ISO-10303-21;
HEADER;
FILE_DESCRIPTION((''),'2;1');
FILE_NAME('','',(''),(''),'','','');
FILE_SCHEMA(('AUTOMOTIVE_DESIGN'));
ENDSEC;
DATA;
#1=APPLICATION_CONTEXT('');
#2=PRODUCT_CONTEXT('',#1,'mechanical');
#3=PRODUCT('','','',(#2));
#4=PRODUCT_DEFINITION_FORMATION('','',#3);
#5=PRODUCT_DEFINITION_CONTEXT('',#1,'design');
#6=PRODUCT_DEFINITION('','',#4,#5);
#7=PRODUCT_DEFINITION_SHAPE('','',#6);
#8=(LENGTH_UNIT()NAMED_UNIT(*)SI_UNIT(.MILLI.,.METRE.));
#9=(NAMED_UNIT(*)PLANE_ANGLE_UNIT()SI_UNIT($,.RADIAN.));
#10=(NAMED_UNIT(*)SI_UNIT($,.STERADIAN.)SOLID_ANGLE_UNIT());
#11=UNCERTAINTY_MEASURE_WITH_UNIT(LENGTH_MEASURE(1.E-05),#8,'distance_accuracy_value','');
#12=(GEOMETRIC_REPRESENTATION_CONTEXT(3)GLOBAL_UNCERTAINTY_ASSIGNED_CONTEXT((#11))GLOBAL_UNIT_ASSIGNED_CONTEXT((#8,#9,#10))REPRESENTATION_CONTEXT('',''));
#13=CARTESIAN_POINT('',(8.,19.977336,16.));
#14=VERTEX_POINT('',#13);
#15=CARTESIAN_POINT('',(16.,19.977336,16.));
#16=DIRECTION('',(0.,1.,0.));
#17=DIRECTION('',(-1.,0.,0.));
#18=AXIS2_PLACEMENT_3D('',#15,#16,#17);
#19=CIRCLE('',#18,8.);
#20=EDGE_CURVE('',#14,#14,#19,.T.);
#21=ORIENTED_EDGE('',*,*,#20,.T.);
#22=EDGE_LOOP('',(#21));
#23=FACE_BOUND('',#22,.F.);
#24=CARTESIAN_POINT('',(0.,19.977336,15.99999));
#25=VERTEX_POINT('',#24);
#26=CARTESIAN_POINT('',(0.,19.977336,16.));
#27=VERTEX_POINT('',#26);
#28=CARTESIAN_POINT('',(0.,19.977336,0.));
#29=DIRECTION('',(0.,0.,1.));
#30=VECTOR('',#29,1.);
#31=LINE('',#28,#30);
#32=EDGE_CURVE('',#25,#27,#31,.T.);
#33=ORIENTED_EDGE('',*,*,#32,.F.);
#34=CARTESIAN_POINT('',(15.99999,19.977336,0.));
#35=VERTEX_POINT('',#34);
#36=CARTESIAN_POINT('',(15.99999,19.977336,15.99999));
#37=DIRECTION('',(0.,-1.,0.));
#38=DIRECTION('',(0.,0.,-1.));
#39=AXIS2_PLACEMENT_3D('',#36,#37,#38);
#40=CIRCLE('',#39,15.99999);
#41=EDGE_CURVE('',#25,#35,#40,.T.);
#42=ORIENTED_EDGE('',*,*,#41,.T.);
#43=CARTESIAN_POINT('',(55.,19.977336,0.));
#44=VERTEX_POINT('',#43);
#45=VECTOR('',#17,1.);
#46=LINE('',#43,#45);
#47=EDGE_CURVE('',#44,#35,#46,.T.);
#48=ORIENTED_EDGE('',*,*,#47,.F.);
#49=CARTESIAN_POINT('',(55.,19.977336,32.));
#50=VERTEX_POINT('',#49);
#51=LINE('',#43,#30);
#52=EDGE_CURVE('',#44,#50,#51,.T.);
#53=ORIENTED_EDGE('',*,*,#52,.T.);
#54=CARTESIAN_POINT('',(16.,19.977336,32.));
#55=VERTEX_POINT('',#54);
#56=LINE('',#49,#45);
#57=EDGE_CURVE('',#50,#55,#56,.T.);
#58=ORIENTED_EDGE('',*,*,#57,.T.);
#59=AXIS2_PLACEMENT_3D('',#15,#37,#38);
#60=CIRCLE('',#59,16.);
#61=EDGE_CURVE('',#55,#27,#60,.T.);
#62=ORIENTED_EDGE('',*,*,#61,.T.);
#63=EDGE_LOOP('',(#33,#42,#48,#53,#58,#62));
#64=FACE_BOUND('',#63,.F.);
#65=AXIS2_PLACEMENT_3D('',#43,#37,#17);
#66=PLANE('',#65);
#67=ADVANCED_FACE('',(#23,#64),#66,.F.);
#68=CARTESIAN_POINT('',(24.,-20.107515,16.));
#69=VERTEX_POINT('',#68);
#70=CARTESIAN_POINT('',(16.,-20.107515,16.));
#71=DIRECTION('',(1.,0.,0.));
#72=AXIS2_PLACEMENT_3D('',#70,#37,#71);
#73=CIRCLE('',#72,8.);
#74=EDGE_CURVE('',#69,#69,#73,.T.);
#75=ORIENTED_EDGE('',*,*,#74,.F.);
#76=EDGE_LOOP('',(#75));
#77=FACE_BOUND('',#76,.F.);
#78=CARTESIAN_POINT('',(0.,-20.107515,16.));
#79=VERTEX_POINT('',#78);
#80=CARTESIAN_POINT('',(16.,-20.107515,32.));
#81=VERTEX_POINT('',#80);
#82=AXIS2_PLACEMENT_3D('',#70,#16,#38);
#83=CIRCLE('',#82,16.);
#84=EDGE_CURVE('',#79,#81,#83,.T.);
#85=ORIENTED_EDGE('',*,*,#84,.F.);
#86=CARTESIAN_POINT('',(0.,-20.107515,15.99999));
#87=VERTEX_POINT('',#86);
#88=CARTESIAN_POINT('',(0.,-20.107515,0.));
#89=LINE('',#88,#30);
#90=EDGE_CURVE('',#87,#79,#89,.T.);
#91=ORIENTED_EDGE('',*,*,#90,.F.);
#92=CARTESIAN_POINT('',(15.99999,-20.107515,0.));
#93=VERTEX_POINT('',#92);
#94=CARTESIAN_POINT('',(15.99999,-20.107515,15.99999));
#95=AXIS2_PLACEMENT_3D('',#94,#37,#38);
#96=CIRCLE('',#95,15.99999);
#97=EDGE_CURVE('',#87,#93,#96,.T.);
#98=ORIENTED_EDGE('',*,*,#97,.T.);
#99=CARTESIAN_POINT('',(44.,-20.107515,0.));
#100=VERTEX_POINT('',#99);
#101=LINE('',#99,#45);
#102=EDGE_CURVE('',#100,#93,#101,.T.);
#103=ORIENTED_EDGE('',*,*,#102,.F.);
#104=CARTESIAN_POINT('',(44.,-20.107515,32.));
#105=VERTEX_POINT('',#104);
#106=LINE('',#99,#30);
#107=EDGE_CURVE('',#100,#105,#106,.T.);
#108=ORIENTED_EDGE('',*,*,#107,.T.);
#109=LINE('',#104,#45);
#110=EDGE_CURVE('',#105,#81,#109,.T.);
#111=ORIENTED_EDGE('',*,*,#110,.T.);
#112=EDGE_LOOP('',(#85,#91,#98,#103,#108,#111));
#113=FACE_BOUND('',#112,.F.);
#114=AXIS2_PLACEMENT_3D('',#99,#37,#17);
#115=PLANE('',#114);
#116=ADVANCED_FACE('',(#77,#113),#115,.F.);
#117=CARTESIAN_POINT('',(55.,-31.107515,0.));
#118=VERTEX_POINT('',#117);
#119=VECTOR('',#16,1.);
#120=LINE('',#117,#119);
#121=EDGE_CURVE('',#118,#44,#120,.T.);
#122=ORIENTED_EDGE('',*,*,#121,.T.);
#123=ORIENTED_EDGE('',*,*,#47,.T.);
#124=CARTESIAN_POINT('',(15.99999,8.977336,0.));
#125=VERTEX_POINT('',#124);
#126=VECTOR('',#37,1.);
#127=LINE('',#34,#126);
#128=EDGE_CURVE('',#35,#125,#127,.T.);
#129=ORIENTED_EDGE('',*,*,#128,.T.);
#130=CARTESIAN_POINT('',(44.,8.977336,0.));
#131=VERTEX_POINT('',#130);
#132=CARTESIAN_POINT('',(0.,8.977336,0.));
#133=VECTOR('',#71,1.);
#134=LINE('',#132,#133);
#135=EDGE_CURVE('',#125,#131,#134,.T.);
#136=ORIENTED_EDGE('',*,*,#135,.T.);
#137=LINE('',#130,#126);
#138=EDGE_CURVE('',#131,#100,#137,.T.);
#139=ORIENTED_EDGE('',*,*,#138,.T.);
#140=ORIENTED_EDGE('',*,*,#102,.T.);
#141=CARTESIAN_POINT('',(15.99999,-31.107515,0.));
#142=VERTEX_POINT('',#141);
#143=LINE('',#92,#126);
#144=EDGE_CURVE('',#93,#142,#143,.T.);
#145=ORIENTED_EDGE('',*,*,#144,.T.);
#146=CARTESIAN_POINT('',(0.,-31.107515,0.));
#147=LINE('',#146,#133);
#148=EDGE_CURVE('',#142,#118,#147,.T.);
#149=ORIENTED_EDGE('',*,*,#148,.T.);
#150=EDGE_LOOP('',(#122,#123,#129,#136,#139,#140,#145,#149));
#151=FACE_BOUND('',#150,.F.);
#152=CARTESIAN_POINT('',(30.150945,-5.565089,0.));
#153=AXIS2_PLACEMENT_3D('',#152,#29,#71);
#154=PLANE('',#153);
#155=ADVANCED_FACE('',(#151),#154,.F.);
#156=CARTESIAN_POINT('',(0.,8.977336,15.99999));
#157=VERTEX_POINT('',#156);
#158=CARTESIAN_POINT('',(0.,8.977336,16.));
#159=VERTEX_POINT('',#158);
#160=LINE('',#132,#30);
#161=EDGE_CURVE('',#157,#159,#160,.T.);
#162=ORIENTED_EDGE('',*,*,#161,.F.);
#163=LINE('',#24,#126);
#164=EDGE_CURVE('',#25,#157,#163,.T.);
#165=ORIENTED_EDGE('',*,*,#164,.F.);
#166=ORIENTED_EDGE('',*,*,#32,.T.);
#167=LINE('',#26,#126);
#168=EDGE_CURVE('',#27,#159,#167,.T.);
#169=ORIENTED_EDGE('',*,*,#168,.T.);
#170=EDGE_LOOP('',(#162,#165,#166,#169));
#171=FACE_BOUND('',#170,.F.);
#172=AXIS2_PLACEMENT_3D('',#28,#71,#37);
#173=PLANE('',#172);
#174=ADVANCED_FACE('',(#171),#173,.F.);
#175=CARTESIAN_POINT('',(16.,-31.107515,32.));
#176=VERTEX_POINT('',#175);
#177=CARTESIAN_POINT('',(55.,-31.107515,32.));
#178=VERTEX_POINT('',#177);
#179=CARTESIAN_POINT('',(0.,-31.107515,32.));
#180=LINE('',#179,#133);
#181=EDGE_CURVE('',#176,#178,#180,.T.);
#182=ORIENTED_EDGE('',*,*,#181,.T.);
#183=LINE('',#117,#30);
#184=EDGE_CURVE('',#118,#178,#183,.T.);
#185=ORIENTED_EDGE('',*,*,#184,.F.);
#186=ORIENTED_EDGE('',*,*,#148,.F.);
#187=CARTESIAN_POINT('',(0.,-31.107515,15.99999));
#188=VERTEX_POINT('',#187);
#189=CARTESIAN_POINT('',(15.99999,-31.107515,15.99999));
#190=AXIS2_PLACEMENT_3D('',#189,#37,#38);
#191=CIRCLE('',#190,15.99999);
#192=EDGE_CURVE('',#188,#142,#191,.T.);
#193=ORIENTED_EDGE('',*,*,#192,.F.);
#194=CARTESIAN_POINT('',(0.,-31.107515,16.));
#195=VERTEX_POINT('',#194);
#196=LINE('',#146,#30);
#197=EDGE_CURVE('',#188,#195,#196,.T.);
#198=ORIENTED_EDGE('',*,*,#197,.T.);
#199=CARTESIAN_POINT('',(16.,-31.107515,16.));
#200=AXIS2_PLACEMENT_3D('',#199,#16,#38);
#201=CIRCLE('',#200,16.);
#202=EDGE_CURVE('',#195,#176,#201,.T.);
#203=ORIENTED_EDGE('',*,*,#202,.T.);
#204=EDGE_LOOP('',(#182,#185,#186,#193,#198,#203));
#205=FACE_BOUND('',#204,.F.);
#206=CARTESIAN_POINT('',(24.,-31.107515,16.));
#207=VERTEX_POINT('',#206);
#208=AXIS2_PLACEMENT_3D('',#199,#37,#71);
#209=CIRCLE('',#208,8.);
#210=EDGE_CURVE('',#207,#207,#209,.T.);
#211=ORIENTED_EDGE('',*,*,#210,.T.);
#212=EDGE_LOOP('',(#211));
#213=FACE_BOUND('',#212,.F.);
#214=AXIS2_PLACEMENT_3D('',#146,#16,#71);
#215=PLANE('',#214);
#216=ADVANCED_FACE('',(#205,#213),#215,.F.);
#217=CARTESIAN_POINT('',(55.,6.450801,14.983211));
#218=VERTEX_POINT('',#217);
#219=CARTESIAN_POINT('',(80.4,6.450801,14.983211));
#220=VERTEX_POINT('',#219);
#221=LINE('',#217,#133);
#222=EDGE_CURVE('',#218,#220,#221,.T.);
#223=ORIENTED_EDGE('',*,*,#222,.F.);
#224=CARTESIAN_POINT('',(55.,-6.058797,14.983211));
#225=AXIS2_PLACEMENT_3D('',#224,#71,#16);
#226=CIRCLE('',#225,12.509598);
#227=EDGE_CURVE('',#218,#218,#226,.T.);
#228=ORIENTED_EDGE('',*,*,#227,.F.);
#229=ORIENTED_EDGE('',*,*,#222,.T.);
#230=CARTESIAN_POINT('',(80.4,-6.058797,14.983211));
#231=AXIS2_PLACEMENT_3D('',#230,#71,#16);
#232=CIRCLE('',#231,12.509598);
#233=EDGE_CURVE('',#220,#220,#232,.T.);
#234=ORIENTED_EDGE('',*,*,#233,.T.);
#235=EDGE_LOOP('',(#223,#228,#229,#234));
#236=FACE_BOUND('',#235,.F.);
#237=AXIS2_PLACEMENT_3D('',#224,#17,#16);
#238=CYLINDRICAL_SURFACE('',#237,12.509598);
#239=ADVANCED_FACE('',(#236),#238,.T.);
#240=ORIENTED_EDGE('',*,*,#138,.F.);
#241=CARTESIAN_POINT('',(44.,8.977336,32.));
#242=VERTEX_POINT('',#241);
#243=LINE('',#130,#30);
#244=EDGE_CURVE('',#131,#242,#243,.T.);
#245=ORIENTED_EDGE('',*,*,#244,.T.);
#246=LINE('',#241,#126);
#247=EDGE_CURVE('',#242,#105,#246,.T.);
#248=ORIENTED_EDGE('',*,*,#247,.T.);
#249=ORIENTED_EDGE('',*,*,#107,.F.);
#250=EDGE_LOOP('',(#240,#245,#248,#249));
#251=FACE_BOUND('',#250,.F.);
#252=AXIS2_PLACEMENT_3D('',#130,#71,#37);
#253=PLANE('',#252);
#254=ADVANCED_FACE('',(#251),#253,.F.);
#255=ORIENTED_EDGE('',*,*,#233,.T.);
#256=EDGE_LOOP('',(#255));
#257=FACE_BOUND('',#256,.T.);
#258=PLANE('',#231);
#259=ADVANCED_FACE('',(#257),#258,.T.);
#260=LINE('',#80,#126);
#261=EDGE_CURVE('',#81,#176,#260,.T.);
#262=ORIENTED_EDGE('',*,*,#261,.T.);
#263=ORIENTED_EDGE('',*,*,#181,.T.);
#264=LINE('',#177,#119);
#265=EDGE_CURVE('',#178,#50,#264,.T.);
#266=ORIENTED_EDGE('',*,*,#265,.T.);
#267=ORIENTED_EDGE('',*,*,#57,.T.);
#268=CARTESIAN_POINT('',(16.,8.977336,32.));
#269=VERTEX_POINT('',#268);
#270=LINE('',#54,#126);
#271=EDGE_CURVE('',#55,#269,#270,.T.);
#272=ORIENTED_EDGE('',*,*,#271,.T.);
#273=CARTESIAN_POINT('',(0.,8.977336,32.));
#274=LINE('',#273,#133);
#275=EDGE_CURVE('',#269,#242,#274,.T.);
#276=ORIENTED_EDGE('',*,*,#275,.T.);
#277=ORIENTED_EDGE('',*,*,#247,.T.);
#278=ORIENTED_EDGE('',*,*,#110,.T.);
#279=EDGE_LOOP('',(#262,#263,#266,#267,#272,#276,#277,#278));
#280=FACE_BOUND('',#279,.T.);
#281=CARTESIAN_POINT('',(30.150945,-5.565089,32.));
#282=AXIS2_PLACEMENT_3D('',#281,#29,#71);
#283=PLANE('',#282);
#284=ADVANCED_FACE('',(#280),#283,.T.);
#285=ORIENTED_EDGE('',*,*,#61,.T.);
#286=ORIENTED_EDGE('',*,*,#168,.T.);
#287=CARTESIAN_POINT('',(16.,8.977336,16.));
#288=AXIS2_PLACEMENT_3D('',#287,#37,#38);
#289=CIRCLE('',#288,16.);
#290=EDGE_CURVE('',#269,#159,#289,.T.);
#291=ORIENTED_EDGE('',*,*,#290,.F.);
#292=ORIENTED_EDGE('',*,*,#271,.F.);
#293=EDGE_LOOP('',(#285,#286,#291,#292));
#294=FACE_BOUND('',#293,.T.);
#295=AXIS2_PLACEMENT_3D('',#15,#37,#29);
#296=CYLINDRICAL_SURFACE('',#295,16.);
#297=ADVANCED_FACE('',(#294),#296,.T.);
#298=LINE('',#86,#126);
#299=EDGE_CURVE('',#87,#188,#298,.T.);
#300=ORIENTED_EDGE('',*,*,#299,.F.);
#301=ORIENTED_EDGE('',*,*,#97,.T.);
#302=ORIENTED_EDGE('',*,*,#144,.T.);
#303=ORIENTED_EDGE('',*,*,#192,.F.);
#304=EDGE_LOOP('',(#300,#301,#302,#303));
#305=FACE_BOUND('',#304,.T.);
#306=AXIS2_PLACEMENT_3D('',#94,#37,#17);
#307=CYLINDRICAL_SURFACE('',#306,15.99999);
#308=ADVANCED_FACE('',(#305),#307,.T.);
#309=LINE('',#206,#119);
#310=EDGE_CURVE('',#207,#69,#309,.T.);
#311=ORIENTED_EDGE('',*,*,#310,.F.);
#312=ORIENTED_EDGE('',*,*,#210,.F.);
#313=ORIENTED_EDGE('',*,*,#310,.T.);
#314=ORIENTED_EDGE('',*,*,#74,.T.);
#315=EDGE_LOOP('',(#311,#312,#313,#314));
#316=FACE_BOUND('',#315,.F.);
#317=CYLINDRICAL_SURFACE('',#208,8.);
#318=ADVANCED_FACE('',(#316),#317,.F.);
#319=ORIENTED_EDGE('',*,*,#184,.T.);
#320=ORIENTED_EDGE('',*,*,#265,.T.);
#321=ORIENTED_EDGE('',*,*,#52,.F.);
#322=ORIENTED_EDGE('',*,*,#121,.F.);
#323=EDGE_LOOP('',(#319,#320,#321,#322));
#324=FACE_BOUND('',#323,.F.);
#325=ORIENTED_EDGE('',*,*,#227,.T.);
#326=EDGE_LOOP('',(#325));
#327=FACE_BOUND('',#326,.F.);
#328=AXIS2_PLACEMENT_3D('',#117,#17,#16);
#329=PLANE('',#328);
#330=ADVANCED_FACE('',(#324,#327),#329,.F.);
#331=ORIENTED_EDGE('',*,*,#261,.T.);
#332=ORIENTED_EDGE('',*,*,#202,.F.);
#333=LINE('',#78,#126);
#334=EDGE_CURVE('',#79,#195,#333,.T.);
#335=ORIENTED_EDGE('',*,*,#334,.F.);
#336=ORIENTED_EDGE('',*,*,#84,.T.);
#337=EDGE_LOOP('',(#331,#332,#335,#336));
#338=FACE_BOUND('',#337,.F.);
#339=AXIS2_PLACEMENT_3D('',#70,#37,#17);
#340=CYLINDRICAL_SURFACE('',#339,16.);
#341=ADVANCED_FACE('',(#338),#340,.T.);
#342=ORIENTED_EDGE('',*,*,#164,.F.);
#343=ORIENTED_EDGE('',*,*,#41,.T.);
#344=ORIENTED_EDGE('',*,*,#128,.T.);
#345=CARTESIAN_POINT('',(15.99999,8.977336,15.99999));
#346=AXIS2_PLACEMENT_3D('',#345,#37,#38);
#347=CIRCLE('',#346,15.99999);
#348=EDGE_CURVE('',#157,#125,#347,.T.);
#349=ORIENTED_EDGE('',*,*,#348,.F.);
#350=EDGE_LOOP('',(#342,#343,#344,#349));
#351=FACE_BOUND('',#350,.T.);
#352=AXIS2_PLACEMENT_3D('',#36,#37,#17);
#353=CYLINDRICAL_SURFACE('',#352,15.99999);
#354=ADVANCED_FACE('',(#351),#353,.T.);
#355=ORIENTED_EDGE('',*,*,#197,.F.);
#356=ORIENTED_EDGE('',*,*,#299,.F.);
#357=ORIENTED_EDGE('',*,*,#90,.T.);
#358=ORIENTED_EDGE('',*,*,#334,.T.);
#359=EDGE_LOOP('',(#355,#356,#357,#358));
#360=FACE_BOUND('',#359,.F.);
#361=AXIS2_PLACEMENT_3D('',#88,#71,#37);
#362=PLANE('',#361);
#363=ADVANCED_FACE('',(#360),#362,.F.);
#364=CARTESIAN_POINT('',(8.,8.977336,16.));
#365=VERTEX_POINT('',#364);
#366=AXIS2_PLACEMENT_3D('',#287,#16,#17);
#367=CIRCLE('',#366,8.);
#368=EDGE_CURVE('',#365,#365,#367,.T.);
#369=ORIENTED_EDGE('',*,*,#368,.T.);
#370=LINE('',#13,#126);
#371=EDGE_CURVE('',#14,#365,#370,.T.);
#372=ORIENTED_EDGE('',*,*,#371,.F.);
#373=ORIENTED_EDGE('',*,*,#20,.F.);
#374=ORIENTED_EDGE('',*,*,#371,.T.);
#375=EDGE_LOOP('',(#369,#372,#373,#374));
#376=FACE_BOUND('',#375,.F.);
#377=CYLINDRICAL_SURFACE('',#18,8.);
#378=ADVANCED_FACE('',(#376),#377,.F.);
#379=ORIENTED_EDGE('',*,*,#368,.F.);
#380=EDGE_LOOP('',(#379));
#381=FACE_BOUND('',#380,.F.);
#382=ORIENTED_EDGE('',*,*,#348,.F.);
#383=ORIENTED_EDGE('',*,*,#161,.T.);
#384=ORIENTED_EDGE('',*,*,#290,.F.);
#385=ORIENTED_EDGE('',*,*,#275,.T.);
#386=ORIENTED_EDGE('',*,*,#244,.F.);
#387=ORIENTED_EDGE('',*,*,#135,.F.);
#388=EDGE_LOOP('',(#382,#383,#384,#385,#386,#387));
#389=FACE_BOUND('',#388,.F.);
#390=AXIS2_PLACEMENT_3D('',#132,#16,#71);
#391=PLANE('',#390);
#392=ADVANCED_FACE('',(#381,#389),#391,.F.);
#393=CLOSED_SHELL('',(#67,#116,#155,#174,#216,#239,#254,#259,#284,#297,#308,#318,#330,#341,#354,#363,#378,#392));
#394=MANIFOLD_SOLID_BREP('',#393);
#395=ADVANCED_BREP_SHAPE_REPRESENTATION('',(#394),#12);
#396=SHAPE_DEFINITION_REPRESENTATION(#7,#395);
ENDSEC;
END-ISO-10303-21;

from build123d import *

# Parameters (mm, degrees)
F1_DEPTH  = 32
F2_R      = 16
F3_R      = 15.99999
F4_R      = 16
F5_R      = 15.99999
F6_R      = 8
F7_DEPTH  = 25.4
F8_R      = 8
F9_DEPTH  = 25.4
F10_R     = 12.5095984865
F11_DEPTH = 25.4


# Not quite as in the source:
# - a fillet or chamfer is up to 0.001 mm smaller than in the source, because OpenCascade refuses the exact size


with BuildPart() as f1:
    # F0 (on Top) → F1 (new body)
    with BuildSketch(Plane.XY):
        Polygon((55, -31.1075148418), (55, 19.9773363869), (0, 19.9773363869), (0, 8.9773363869), (44, 8.9773363869), (44, -20.1075148418), (0, -20.1075148418), (0, -31.1075148418), align=None)
    extrude(amount=F1_DEPTH)

    # F2
    f2_edges = [f1.edges().sort_by_distance(p)[0] for p in [
        (0, -25.607515, 32),
    ]]
    fillet(f2_edges, radius=F2_R)

    # F3 (radius 16 in the source; OpenCascade refuses exactly that, so slightly less here)
    f3_edges = [f1.edges().sort_by_distance(p)[0] for p in [
        (0, -25.607515, 0),
    ]]
    fillet(f3_edges, radius=F3_R)

    # F4
    f4_edges = [f1.edges().sort_by_distance(p)[0] for p in [
        (0, 14.477336, 32),
    ]]
    fillet(f4_edges, radius=F4_R)

    # F5 (radius 16 in the source; OpenCascade refuses exactly that, so slightly less here)
    f5_edges = [f1.edges().sort_by_distance(p)[0] for p in [
        (0, 14.477336, 0),
    ]]
    fillet(f5_edges, radius=F5_R)

    # F6 (on face) → F7 (cut)
    with BuildSketch(Plane(origin=(0, 19.9773363869, 0), x_dir=(-1, 0, 0), z_dir=(0, 1, 0))):
        with Locations((-16, 16)):
            Circle(F6_R)
    extrude(amount=-F7_DEPTH, mode=Mode.SUBTRACT)

    # F8 (on face) → F9 (cut)
    with BuildSketch(Plane.XZ.offset(31.1075148418)):
        with Locations((16, 16)):
            Circle(F8_R)
    extrude(amount=-F9_DEPTH, mode=Mode.SUBTRACT)

    # F10 (on face) → F11 (join)
    with BuildSketch(Plane.YZ.offset(55)):
        with Locations((-6.0587972403, 14.9832107127)):
            Circle(F10_R)
    extrude(amount=F11_DEPTH)


solid = f1.part
